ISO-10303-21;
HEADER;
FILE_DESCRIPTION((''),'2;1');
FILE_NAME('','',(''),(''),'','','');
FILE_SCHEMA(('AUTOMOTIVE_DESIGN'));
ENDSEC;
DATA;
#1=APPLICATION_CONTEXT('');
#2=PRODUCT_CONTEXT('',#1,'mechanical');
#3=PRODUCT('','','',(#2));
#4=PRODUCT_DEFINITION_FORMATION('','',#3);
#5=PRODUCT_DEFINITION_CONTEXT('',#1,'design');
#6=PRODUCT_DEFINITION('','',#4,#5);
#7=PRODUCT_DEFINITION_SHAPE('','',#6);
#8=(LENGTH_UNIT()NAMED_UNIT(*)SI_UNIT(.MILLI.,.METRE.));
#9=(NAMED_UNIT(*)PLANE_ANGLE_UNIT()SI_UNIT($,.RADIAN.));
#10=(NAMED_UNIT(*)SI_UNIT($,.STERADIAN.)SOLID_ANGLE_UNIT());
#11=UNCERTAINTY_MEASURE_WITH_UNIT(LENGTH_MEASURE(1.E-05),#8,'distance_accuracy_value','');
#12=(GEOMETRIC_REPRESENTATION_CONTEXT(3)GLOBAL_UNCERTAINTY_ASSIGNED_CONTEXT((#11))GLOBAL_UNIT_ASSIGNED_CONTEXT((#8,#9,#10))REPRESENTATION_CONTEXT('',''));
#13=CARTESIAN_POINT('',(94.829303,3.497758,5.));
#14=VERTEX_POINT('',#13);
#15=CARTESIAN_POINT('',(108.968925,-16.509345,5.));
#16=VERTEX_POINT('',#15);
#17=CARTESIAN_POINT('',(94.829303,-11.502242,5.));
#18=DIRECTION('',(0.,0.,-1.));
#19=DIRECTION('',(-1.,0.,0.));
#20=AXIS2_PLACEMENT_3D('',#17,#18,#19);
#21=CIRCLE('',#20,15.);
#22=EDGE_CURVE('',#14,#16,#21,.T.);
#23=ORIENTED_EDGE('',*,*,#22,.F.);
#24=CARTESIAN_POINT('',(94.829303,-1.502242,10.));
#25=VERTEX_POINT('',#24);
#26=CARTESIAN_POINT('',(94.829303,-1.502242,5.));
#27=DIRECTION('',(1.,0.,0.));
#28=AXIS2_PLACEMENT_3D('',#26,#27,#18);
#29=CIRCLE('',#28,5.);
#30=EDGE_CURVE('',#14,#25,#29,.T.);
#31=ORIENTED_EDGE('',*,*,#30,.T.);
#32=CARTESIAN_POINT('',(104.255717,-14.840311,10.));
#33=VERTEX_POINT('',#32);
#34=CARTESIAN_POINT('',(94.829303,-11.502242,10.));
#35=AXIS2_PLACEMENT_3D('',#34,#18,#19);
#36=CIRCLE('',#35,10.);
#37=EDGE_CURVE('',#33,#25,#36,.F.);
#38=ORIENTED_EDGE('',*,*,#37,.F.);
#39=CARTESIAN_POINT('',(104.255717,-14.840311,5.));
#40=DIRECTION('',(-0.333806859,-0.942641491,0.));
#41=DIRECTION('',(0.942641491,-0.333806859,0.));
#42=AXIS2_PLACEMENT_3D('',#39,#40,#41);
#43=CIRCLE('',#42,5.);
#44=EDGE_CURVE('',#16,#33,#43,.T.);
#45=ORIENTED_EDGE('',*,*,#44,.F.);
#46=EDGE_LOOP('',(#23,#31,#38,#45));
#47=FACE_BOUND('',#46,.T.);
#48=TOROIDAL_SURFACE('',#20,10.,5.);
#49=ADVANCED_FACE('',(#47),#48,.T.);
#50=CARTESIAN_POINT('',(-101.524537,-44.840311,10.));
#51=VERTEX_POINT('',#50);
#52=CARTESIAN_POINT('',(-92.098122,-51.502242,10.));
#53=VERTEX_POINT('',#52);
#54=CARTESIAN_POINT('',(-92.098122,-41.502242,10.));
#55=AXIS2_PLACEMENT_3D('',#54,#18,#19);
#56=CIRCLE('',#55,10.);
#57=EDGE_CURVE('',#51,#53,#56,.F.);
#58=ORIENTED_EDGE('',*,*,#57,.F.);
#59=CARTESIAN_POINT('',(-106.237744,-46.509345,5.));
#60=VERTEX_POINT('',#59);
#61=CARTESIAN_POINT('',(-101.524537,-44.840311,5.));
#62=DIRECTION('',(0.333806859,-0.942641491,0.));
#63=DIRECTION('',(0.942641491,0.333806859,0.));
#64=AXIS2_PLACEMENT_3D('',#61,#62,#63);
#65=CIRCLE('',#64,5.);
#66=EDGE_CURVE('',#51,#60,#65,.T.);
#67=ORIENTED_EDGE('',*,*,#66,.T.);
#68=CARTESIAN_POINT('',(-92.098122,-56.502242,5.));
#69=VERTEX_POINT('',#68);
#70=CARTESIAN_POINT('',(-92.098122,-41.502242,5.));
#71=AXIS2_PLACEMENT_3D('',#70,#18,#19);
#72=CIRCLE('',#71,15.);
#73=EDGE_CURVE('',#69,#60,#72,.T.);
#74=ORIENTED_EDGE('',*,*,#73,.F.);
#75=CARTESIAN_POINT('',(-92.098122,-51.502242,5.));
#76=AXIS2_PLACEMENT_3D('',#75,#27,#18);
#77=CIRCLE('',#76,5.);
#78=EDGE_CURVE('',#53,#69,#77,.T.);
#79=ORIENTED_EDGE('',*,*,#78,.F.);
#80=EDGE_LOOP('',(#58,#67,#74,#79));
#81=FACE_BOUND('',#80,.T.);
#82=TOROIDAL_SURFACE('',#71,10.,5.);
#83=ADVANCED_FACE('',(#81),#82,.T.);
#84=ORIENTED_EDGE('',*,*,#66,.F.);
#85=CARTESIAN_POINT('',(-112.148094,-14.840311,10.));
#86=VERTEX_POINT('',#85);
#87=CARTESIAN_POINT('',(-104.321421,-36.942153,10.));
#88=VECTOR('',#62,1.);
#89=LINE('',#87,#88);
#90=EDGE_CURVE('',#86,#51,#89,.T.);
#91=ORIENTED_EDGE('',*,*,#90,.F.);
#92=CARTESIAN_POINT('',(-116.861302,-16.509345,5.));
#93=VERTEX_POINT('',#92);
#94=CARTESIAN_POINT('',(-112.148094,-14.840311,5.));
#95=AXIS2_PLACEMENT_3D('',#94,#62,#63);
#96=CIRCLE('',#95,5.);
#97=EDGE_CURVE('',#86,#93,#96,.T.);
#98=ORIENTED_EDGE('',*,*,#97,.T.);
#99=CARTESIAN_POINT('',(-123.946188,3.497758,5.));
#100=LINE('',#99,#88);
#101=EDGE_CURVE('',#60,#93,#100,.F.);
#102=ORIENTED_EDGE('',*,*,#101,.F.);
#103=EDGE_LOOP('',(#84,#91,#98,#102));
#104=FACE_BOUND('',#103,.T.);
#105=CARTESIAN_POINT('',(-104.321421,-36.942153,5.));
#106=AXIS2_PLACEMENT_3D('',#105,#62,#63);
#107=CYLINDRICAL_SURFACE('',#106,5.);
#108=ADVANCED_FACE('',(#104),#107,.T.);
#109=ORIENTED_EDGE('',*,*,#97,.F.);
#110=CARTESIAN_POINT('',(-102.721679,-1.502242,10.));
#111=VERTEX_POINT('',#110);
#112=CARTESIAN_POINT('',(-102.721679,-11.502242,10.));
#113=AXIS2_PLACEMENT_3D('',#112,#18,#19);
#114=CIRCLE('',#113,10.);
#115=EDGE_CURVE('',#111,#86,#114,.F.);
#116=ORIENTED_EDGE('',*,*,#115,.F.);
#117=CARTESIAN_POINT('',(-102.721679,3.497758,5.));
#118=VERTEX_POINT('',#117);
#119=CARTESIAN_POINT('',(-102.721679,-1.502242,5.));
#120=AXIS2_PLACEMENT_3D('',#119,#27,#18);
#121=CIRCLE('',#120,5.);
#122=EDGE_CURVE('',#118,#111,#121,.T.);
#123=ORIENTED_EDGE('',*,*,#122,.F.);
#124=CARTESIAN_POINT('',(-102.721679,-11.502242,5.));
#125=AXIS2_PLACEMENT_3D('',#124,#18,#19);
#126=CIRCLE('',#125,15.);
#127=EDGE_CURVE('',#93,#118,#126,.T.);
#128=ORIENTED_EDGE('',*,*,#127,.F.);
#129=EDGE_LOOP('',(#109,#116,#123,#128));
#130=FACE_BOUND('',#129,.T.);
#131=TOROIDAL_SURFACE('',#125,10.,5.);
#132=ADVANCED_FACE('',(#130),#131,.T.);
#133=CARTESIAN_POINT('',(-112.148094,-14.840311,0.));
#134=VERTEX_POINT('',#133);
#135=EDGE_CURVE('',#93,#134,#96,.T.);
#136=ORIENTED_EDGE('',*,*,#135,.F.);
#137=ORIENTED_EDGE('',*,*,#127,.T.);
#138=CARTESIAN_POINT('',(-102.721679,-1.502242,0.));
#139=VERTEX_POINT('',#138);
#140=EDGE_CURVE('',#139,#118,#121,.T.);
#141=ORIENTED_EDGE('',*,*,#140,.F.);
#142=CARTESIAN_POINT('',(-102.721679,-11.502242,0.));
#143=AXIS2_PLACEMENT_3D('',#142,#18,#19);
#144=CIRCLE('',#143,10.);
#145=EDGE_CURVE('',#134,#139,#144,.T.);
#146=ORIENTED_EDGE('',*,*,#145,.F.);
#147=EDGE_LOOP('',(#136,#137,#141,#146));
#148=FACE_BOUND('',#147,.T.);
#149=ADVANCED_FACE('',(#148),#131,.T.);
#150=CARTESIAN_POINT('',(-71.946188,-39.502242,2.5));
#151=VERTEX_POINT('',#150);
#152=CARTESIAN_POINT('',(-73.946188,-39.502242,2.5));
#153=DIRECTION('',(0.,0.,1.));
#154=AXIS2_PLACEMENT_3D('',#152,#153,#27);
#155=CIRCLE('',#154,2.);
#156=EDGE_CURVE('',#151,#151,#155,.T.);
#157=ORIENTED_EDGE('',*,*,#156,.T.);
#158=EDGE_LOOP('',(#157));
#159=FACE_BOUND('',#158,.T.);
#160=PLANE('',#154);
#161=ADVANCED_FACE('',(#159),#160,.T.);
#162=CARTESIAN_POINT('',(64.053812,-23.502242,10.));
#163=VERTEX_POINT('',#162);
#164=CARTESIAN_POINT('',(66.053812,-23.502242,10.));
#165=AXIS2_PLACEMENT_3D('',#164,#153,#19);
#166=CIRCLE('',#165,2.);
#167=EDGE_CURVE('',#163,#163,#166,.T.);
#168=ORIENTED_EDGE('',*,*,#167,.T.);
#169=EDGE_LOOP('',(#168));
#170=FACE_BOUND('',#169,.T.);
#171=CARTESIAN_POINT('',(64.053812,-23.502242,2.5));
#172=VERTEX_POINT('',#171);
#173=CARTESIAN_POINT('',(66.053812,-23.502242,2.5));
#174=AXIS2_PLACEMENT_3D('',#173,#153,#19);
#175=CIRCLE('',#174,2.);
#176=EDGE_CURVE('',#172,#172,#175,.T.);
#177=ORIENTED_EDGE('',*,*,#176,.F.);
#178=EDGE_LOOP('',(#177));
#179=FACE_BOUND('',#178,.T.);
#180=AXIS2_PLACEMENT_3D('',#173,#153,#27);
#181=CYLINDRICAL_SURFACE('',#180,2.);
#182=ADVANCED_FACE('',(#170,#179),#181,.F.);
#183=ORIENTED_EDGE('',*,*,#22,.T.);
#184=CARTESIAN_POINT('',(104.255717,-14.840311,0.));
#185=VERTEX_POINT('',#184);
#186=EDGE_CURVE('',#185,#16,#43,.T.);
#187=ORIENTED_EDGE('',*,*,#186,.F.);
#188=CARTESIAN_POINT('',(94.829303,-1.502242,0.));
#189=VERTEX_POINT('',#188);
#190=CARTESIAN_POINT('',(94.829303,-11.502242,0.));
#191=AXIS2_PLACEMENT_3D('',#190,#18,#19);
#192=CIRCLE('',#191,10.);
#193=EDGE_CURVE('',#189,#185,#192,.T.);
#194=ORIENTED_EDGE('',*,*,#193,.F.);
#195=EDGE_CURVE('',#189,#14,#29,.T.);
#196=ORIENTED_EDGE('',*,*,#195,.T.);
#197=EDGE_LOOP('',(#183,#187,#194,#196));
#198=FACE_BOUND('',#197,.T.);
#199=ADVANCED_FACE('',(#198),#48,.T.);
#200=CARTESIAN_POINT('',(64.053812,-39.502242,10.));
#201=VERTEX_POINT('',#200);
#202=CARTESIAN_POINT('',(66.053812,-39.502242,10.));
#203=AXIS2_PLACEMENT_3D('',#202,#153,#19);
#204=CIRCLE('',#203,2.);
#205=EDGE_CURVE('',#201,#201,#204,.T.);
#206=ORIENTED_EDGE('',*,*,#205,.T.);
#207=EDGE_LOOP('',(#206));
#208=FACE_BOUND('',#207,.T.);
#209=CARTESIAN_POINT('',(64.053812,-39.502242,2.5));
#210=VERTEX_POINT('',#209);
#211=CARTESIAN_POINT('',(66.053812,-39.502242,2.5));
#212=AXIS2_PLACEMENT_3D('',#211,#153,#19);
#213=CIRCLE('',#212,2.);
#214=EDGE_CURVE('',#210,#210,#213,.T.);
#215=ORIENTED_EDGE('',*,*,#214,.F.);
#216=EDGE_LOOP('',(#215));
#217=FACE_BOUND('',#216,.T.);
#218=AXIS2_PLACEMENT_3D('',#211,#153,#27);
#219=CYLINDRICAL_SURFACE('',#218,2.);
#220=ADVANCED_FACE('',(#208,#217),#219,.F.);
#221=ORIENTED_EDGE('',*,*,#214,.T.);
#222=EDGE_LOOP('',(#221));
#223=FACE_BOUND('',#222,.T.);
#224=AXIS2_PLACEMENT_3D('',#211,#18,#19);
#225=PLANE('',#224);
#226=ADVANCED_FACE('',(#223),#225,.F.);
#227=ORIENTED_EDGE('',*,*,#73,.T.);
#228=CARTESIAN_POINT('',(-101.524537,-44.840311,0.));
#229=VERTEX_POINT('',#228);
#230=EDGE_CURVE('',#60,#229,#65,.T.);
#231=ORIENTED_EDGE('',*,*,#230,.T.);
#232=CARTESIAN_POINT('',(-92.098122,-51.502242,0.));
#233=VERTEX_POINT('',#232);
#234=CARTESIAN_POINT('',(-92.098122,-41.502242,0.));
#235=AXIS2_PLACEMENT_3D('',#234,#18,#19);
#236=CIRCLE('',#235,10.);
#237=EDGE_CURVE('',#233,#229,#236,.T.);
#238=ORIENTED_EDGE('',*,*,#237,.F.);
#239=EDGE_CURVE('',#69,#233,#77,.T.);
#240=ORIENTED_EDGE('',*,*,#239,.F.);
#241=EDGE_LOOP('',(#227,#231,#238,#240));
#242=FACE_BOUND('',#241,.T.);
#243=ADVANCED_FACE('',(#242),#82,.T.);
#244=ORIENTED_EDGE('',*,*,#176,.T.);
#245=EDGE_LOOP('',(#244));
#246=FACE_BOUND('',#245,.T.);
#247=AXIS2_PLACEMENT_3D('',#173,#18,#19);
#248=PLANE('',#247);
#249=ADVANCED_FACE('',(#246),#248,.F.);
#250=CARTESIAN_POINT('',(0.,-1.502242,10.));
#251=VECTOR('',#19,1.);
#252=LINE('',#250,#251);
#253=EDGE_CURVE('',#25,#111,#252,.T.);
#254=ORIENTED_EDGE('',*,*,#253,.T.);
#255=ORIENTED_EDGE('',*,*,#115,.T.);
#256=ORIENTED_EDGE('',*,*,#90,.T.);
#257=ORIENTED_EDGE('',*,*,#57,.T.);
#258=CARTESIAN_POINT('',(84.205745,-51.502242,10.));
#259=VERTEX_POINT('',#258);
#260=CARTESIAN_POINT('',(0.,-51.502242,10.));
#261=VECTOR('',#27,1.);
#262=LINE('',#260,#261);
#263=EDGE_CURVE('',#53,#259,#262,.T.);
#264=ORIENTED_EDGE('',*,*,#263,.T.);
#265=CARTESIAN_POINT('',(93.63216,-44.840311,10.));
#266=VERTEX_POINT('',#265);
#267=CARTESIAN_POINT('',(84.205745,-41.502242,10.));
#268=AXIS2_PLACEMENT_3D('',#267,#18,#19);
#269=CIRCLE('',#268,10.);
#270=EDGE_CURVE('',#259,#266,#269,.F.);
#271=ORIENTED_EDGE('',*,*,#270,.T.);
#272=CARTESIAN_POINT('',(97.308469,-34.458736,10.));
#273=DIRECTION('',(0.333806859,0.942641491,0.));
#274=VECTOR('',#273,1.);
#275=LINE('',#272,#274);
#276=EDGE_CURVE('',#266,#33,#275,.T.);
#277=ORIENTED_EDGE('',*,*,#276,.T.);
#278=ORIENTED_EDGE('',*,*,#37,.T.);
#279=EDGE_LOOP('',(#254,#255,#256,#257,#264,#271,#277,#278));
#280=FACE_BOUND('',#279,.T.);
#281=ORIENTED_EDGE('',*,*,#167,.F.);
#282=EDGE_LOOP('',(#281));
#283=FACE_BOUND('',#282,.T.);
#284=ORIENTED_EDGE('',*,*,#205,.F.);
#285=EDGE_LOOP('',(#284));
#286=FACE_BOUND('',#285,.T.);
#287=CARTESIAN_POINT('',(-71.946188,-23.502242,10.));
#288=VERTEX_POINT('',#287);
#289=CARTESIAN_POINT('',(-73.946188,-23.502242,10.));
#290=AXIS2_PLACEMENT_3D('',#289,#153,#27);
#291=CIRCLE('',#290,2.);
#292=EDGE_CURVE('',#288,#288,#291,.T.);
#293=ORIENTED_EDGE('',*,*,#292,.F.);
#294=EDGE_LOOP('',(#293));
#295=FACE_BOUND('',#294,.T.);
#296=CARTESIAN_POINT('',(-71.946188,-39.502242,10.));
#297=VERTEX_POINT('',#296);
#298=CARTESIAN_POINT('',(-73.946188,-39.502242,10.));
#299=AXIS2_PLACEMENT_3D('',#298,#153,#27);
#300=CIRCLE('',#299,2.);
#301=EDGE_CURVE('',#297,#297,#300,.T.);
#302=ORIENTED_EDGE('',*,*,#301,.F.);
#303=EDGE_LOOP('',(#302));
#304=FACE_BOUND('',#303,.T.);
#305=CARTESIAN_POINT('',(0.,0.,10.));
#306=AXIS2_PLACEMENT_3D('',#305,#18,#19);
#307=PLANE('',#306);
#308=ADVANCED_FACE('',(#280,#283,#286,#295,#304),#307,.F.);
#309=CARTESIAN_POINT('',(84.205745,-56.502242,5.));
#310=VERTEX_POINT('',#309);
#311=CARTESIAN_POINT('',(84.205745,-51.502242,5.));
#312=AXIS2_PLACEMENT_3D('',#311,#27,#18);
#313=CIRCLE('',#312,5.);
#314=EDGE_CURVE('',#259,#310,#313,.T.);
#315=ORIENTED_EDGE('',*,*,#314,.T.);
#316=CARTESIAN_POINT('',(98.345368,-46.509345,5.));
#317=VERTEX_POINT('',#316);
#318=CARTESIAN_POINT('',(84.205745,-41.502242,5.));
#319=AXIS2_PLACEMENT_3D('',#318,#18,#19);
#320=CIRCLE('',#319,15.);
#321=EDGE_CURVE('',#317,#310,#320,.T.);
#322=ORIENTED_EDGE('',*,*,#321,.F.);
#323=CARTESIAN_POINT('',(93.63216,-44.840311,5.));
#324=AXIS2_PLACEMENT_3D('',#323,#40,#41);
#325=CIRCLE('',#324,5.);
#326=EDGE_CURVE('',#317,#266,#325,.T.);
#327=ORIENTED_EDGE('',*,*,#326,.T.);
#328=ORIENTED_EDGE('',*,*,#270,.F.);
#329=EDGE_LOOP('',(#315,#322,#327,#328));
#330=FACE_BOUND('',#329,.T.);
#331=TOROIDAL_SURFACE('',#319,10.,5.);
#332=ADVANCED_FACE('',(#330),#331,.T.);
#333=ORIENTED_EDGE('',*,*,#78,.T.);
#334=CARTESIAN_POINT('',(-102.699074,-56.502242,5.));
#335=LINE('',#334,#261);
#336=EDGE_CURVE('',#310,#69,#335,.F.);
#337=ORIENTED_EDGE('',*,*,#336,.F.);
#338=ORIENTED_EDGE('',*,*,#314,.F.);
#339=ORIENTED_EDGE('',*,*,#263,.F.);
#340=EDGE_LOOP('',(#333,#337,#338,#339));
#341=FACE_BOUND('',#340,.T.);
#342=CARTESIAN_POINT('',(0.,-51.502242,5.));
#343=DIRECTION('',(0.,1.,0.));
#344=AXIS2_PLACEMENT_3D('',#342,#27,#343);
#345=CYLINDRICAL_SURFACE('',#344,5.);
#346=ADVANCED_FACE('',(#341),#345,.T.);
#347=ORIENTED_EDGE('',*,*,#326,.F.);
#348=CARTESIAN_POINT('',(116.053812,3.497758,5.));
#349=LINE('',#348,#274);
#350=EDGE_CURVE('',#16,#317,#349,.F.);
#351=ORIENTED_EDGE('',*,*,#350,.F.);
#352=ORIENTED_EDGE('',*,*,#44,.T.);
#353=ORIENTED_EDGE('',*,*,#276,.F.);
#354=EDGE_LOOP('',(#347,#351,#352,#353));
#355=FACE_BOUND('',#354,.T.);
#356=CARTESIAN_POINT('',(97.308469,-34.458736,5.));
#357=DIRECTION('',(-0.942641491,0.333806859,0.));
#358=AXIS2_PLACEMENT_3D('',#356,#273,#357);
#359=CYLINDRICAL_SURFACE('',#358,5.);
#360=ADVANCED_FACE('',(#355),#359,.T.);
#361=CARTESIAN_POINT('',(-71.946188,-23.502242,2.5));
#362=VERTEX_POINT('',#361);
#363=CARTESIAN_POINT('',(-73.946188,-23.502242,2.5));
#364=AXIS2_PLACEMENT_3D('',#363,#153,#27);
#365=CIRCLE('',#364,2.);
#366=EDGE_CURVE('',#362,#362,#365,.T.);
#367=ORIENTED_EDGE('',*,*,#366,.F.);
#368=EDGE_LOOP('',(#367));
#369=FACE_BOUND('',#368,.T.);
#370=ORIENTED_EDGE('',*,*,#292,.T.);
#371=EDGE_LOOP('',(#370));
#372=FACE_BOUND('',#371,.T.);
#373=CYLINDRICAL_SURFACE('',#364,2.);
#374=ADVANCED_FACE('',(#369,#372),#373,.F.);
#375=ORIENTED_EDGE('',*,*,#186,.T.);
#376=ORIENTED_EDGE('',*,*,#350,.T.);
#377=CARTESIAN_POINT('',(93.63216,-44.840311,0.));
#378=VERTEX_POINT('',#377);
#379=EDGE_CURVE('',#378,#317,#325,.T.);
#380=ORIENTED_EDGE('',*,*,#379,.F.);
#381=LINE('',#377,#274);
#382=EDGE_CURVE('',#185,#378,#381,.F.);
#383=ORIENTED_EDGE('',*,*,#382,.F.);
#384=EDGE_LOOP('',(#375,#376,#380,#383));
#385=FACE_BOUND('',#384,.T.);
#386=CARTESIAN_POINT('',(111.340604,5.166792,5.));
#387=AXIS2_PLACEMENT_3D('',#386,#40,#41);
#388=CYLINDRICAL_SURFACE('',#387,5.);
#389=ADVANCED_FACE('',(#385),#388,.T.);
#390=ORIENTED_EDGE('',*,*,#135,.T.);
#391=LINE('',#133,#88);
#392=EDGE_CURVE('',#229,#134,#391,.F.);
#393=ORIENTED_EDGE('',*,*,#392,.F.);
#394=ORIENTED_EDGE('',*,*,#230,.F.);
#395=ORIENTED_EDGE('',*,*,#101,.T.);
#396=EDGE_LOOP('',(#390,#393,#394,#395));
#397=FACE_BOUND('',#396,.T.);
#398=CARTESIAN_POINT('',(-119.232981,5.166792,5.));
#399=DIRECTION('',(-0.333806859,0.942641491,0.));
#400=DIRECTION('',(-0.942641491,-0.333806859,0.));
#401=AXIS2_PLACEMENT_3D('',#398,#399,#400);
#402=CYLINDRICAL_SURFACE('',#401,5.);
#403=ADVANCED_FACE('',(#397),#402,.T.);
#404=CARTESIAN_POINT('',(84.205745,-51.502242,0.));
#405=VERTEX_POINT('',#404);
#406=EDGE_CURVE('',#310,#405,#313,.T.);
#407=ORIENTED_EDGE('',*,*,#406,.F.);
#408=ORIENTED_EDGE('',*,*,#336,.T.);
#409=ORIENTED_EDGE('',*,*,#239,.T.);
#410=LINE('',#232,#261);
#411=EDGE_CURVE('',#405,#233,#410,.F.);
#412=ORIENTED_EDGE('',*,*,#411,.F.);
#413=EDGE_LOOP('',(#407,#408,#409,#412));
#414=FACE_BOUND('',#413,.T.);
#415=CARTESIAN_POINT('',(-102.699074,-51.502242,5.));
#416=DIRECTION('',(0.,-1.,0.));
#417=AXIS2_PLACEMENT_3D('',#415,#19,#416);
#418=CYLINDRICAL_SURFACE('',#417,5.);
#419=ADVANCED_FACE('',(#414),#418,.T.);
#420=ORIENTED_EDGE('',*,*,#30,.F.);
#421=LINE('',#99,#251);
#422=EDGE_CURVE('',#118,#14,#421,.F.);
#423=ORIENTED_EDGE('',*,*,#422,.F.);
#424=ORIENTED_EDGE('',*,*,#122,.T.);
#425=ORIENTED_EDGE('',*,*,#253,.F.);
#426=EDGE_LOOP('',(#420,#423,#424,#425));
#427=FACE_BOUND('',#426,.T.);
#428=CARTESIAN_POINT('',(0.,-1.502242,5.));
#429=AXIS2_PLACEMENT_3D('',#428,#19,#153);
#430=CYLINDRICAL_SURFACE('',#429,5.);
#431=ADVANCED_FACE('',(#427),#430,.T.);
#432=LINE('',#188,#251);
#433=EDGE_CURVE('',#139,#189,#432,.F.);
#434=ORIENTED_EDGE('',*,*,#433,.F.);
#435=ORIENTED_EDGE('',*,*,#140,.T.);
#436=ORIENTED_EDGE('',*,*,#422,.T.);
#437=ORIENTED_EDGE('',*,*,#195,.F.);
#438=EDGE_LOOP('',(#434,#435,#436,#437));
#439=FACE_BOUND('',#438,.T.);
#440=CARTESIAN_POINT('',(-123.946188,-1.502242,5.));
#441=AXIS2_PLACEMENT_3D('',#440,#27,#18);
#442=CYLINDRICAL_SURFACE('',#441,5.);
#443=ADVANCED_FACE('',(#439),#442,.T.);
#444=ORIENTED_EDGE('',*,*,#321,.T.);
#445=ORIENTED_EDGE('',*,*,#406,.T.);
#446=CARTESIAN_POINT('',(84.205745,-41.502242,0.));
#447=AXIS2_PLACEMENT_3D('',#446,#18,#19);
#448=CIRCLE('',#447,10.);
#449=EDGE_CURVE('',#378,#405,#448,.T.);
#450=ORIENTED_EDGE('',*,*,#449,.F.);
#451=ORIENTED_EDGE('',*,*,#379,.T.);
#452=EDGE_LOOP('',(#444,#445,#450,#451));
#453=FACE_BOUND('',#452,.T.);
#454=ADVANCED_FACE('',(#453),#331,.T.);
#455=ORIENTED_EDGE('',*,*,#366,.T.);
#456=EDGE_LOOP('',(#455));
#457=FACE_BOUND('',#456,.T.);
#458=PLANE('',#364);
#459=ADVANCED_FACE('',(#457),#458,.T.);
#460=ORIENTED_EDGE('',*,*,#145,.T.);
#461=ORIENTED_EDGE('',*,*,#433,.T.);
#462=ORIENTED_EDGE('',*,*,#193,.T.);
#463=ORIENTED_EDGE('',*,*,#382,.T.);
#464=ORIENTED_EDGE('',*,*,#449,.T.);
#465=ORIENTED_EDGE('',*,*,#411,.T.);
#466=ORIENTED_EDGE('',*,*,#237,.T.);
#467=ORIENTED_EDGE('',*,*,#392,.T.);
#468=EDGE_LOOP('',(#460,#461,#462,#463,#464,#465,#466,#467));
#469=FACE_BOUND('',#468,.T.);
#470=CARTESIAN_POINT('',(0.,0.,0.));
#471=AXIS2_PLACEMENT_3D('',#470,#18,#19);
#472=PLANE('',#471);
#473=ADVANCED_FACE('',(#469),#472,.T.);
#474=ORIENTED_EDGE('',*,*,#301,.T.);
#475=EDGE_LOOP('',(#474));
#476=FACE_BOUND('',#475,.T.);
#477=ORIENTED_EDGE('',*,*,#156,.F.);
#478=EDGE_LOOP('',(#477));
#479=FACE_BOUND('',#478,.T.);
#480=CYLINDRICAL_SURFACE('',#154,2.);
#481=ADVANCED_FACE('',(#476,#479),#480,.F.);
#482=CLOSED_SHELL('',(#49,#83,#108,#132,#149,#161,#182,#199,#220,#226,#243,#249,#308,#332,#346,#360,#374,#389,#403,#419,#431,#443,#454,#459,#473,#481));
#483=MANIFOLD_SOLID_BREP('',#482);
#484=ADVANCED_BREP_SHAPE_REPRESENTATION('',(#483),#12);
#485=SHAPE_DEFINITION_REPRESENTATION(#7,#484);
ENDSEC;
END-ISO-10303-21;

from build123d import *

# Parameters (mm, degrees)
EXTRUDE_1_DEPTH     = 10
FILLET_1_R          = 15
FILLET_2_R          = 5
SKETCH_2_R          = 2
CUT_EXTRUDE_1_DEPTH = 7.5


with BuildPart() as part:
    # 草圖1 → 填料-伸長1 (new body)
    with BuildSketch(Plane.XY):
        Polygon((-123.946188341, 3.497757848), (-102.699073989, -56.502242152), (94.806697307, -56.502242152), (116.053811659, 3.497757848), align=None)
    extrude(amount=EXTRUDE_1_DEPTH)

    # 圓角1
    fillet_1_edges = [part.edges().sort_by_distance(p)[0] for p in [
        (116.053811659, 3.497757848, 5),
        (94.806697307, -56.502242152, 5),
        (-102.699073989, -56.502242152, 5),
        (-123.946188341, 3.497757848, 5),
    ]]
    fillet(fillet_1_edges, radius=FILLET_1_R)

    # 圓角2
    fillet_2_edges = [part.edges().sort_by_distance(p)[0] for p in [
        (107.078925905, -2.845064302, 10),
        (103.657146356, -31.509345041, 10),
        (92.862923252, -53.75186548, 10),
        (-3.946188341, -56.502242152, 10),
        (-100.755299934, -53.75186548, 10),
        (-111.549523037, -31.509345041, 10),
        (-114.971302586, -2.845064302, 10),
        (-3.946188341, 3.497757848, 10),
        (-114.971302586, -2.845064302, 0),
        (-111.549523037, -31.509345041, 0),
        (-100.755299934, -53.75186548, 0),
        (-3.946188341, -56.502242152, 0),
        (92.862923252, -53.75186548, 0),
        (103.657146356, -31.509345041, 0),
        (107.078925905, -2.845064302, 0),
        (-3.946188341, 3.497757848, 0),
    ]]
    fillet(fillet_2_edges, radius=FILLET_2_R - 0.0001)  # a hair under: the kernel refuses the full size

    # 草圖2 → 除料-伸長1 (cut)
    with BuildSketch(Plane.XY.offset(10)):
        with Locations((-73.946188341, -23.502242152)):
            Circle(SKETCH_2_R)
        with Locations((-73.946188341, -39.502242152)):
            Circle(SKETCH_2_R)
        with Locations(Location((66.053811659, -39.502242152, 0), (0, 0, 180))):
            Circle(SKETCH_2_R)
        with Locations(Location((66.053811659, -23.502242152, 0), (0, 0, 180))):
            Circle(SKETCH_2_R)
    extrude(amount=-CUT_EXTRUDE_1_DEPTH, mode=Mode.SUBTRACT)


solid = part.part
